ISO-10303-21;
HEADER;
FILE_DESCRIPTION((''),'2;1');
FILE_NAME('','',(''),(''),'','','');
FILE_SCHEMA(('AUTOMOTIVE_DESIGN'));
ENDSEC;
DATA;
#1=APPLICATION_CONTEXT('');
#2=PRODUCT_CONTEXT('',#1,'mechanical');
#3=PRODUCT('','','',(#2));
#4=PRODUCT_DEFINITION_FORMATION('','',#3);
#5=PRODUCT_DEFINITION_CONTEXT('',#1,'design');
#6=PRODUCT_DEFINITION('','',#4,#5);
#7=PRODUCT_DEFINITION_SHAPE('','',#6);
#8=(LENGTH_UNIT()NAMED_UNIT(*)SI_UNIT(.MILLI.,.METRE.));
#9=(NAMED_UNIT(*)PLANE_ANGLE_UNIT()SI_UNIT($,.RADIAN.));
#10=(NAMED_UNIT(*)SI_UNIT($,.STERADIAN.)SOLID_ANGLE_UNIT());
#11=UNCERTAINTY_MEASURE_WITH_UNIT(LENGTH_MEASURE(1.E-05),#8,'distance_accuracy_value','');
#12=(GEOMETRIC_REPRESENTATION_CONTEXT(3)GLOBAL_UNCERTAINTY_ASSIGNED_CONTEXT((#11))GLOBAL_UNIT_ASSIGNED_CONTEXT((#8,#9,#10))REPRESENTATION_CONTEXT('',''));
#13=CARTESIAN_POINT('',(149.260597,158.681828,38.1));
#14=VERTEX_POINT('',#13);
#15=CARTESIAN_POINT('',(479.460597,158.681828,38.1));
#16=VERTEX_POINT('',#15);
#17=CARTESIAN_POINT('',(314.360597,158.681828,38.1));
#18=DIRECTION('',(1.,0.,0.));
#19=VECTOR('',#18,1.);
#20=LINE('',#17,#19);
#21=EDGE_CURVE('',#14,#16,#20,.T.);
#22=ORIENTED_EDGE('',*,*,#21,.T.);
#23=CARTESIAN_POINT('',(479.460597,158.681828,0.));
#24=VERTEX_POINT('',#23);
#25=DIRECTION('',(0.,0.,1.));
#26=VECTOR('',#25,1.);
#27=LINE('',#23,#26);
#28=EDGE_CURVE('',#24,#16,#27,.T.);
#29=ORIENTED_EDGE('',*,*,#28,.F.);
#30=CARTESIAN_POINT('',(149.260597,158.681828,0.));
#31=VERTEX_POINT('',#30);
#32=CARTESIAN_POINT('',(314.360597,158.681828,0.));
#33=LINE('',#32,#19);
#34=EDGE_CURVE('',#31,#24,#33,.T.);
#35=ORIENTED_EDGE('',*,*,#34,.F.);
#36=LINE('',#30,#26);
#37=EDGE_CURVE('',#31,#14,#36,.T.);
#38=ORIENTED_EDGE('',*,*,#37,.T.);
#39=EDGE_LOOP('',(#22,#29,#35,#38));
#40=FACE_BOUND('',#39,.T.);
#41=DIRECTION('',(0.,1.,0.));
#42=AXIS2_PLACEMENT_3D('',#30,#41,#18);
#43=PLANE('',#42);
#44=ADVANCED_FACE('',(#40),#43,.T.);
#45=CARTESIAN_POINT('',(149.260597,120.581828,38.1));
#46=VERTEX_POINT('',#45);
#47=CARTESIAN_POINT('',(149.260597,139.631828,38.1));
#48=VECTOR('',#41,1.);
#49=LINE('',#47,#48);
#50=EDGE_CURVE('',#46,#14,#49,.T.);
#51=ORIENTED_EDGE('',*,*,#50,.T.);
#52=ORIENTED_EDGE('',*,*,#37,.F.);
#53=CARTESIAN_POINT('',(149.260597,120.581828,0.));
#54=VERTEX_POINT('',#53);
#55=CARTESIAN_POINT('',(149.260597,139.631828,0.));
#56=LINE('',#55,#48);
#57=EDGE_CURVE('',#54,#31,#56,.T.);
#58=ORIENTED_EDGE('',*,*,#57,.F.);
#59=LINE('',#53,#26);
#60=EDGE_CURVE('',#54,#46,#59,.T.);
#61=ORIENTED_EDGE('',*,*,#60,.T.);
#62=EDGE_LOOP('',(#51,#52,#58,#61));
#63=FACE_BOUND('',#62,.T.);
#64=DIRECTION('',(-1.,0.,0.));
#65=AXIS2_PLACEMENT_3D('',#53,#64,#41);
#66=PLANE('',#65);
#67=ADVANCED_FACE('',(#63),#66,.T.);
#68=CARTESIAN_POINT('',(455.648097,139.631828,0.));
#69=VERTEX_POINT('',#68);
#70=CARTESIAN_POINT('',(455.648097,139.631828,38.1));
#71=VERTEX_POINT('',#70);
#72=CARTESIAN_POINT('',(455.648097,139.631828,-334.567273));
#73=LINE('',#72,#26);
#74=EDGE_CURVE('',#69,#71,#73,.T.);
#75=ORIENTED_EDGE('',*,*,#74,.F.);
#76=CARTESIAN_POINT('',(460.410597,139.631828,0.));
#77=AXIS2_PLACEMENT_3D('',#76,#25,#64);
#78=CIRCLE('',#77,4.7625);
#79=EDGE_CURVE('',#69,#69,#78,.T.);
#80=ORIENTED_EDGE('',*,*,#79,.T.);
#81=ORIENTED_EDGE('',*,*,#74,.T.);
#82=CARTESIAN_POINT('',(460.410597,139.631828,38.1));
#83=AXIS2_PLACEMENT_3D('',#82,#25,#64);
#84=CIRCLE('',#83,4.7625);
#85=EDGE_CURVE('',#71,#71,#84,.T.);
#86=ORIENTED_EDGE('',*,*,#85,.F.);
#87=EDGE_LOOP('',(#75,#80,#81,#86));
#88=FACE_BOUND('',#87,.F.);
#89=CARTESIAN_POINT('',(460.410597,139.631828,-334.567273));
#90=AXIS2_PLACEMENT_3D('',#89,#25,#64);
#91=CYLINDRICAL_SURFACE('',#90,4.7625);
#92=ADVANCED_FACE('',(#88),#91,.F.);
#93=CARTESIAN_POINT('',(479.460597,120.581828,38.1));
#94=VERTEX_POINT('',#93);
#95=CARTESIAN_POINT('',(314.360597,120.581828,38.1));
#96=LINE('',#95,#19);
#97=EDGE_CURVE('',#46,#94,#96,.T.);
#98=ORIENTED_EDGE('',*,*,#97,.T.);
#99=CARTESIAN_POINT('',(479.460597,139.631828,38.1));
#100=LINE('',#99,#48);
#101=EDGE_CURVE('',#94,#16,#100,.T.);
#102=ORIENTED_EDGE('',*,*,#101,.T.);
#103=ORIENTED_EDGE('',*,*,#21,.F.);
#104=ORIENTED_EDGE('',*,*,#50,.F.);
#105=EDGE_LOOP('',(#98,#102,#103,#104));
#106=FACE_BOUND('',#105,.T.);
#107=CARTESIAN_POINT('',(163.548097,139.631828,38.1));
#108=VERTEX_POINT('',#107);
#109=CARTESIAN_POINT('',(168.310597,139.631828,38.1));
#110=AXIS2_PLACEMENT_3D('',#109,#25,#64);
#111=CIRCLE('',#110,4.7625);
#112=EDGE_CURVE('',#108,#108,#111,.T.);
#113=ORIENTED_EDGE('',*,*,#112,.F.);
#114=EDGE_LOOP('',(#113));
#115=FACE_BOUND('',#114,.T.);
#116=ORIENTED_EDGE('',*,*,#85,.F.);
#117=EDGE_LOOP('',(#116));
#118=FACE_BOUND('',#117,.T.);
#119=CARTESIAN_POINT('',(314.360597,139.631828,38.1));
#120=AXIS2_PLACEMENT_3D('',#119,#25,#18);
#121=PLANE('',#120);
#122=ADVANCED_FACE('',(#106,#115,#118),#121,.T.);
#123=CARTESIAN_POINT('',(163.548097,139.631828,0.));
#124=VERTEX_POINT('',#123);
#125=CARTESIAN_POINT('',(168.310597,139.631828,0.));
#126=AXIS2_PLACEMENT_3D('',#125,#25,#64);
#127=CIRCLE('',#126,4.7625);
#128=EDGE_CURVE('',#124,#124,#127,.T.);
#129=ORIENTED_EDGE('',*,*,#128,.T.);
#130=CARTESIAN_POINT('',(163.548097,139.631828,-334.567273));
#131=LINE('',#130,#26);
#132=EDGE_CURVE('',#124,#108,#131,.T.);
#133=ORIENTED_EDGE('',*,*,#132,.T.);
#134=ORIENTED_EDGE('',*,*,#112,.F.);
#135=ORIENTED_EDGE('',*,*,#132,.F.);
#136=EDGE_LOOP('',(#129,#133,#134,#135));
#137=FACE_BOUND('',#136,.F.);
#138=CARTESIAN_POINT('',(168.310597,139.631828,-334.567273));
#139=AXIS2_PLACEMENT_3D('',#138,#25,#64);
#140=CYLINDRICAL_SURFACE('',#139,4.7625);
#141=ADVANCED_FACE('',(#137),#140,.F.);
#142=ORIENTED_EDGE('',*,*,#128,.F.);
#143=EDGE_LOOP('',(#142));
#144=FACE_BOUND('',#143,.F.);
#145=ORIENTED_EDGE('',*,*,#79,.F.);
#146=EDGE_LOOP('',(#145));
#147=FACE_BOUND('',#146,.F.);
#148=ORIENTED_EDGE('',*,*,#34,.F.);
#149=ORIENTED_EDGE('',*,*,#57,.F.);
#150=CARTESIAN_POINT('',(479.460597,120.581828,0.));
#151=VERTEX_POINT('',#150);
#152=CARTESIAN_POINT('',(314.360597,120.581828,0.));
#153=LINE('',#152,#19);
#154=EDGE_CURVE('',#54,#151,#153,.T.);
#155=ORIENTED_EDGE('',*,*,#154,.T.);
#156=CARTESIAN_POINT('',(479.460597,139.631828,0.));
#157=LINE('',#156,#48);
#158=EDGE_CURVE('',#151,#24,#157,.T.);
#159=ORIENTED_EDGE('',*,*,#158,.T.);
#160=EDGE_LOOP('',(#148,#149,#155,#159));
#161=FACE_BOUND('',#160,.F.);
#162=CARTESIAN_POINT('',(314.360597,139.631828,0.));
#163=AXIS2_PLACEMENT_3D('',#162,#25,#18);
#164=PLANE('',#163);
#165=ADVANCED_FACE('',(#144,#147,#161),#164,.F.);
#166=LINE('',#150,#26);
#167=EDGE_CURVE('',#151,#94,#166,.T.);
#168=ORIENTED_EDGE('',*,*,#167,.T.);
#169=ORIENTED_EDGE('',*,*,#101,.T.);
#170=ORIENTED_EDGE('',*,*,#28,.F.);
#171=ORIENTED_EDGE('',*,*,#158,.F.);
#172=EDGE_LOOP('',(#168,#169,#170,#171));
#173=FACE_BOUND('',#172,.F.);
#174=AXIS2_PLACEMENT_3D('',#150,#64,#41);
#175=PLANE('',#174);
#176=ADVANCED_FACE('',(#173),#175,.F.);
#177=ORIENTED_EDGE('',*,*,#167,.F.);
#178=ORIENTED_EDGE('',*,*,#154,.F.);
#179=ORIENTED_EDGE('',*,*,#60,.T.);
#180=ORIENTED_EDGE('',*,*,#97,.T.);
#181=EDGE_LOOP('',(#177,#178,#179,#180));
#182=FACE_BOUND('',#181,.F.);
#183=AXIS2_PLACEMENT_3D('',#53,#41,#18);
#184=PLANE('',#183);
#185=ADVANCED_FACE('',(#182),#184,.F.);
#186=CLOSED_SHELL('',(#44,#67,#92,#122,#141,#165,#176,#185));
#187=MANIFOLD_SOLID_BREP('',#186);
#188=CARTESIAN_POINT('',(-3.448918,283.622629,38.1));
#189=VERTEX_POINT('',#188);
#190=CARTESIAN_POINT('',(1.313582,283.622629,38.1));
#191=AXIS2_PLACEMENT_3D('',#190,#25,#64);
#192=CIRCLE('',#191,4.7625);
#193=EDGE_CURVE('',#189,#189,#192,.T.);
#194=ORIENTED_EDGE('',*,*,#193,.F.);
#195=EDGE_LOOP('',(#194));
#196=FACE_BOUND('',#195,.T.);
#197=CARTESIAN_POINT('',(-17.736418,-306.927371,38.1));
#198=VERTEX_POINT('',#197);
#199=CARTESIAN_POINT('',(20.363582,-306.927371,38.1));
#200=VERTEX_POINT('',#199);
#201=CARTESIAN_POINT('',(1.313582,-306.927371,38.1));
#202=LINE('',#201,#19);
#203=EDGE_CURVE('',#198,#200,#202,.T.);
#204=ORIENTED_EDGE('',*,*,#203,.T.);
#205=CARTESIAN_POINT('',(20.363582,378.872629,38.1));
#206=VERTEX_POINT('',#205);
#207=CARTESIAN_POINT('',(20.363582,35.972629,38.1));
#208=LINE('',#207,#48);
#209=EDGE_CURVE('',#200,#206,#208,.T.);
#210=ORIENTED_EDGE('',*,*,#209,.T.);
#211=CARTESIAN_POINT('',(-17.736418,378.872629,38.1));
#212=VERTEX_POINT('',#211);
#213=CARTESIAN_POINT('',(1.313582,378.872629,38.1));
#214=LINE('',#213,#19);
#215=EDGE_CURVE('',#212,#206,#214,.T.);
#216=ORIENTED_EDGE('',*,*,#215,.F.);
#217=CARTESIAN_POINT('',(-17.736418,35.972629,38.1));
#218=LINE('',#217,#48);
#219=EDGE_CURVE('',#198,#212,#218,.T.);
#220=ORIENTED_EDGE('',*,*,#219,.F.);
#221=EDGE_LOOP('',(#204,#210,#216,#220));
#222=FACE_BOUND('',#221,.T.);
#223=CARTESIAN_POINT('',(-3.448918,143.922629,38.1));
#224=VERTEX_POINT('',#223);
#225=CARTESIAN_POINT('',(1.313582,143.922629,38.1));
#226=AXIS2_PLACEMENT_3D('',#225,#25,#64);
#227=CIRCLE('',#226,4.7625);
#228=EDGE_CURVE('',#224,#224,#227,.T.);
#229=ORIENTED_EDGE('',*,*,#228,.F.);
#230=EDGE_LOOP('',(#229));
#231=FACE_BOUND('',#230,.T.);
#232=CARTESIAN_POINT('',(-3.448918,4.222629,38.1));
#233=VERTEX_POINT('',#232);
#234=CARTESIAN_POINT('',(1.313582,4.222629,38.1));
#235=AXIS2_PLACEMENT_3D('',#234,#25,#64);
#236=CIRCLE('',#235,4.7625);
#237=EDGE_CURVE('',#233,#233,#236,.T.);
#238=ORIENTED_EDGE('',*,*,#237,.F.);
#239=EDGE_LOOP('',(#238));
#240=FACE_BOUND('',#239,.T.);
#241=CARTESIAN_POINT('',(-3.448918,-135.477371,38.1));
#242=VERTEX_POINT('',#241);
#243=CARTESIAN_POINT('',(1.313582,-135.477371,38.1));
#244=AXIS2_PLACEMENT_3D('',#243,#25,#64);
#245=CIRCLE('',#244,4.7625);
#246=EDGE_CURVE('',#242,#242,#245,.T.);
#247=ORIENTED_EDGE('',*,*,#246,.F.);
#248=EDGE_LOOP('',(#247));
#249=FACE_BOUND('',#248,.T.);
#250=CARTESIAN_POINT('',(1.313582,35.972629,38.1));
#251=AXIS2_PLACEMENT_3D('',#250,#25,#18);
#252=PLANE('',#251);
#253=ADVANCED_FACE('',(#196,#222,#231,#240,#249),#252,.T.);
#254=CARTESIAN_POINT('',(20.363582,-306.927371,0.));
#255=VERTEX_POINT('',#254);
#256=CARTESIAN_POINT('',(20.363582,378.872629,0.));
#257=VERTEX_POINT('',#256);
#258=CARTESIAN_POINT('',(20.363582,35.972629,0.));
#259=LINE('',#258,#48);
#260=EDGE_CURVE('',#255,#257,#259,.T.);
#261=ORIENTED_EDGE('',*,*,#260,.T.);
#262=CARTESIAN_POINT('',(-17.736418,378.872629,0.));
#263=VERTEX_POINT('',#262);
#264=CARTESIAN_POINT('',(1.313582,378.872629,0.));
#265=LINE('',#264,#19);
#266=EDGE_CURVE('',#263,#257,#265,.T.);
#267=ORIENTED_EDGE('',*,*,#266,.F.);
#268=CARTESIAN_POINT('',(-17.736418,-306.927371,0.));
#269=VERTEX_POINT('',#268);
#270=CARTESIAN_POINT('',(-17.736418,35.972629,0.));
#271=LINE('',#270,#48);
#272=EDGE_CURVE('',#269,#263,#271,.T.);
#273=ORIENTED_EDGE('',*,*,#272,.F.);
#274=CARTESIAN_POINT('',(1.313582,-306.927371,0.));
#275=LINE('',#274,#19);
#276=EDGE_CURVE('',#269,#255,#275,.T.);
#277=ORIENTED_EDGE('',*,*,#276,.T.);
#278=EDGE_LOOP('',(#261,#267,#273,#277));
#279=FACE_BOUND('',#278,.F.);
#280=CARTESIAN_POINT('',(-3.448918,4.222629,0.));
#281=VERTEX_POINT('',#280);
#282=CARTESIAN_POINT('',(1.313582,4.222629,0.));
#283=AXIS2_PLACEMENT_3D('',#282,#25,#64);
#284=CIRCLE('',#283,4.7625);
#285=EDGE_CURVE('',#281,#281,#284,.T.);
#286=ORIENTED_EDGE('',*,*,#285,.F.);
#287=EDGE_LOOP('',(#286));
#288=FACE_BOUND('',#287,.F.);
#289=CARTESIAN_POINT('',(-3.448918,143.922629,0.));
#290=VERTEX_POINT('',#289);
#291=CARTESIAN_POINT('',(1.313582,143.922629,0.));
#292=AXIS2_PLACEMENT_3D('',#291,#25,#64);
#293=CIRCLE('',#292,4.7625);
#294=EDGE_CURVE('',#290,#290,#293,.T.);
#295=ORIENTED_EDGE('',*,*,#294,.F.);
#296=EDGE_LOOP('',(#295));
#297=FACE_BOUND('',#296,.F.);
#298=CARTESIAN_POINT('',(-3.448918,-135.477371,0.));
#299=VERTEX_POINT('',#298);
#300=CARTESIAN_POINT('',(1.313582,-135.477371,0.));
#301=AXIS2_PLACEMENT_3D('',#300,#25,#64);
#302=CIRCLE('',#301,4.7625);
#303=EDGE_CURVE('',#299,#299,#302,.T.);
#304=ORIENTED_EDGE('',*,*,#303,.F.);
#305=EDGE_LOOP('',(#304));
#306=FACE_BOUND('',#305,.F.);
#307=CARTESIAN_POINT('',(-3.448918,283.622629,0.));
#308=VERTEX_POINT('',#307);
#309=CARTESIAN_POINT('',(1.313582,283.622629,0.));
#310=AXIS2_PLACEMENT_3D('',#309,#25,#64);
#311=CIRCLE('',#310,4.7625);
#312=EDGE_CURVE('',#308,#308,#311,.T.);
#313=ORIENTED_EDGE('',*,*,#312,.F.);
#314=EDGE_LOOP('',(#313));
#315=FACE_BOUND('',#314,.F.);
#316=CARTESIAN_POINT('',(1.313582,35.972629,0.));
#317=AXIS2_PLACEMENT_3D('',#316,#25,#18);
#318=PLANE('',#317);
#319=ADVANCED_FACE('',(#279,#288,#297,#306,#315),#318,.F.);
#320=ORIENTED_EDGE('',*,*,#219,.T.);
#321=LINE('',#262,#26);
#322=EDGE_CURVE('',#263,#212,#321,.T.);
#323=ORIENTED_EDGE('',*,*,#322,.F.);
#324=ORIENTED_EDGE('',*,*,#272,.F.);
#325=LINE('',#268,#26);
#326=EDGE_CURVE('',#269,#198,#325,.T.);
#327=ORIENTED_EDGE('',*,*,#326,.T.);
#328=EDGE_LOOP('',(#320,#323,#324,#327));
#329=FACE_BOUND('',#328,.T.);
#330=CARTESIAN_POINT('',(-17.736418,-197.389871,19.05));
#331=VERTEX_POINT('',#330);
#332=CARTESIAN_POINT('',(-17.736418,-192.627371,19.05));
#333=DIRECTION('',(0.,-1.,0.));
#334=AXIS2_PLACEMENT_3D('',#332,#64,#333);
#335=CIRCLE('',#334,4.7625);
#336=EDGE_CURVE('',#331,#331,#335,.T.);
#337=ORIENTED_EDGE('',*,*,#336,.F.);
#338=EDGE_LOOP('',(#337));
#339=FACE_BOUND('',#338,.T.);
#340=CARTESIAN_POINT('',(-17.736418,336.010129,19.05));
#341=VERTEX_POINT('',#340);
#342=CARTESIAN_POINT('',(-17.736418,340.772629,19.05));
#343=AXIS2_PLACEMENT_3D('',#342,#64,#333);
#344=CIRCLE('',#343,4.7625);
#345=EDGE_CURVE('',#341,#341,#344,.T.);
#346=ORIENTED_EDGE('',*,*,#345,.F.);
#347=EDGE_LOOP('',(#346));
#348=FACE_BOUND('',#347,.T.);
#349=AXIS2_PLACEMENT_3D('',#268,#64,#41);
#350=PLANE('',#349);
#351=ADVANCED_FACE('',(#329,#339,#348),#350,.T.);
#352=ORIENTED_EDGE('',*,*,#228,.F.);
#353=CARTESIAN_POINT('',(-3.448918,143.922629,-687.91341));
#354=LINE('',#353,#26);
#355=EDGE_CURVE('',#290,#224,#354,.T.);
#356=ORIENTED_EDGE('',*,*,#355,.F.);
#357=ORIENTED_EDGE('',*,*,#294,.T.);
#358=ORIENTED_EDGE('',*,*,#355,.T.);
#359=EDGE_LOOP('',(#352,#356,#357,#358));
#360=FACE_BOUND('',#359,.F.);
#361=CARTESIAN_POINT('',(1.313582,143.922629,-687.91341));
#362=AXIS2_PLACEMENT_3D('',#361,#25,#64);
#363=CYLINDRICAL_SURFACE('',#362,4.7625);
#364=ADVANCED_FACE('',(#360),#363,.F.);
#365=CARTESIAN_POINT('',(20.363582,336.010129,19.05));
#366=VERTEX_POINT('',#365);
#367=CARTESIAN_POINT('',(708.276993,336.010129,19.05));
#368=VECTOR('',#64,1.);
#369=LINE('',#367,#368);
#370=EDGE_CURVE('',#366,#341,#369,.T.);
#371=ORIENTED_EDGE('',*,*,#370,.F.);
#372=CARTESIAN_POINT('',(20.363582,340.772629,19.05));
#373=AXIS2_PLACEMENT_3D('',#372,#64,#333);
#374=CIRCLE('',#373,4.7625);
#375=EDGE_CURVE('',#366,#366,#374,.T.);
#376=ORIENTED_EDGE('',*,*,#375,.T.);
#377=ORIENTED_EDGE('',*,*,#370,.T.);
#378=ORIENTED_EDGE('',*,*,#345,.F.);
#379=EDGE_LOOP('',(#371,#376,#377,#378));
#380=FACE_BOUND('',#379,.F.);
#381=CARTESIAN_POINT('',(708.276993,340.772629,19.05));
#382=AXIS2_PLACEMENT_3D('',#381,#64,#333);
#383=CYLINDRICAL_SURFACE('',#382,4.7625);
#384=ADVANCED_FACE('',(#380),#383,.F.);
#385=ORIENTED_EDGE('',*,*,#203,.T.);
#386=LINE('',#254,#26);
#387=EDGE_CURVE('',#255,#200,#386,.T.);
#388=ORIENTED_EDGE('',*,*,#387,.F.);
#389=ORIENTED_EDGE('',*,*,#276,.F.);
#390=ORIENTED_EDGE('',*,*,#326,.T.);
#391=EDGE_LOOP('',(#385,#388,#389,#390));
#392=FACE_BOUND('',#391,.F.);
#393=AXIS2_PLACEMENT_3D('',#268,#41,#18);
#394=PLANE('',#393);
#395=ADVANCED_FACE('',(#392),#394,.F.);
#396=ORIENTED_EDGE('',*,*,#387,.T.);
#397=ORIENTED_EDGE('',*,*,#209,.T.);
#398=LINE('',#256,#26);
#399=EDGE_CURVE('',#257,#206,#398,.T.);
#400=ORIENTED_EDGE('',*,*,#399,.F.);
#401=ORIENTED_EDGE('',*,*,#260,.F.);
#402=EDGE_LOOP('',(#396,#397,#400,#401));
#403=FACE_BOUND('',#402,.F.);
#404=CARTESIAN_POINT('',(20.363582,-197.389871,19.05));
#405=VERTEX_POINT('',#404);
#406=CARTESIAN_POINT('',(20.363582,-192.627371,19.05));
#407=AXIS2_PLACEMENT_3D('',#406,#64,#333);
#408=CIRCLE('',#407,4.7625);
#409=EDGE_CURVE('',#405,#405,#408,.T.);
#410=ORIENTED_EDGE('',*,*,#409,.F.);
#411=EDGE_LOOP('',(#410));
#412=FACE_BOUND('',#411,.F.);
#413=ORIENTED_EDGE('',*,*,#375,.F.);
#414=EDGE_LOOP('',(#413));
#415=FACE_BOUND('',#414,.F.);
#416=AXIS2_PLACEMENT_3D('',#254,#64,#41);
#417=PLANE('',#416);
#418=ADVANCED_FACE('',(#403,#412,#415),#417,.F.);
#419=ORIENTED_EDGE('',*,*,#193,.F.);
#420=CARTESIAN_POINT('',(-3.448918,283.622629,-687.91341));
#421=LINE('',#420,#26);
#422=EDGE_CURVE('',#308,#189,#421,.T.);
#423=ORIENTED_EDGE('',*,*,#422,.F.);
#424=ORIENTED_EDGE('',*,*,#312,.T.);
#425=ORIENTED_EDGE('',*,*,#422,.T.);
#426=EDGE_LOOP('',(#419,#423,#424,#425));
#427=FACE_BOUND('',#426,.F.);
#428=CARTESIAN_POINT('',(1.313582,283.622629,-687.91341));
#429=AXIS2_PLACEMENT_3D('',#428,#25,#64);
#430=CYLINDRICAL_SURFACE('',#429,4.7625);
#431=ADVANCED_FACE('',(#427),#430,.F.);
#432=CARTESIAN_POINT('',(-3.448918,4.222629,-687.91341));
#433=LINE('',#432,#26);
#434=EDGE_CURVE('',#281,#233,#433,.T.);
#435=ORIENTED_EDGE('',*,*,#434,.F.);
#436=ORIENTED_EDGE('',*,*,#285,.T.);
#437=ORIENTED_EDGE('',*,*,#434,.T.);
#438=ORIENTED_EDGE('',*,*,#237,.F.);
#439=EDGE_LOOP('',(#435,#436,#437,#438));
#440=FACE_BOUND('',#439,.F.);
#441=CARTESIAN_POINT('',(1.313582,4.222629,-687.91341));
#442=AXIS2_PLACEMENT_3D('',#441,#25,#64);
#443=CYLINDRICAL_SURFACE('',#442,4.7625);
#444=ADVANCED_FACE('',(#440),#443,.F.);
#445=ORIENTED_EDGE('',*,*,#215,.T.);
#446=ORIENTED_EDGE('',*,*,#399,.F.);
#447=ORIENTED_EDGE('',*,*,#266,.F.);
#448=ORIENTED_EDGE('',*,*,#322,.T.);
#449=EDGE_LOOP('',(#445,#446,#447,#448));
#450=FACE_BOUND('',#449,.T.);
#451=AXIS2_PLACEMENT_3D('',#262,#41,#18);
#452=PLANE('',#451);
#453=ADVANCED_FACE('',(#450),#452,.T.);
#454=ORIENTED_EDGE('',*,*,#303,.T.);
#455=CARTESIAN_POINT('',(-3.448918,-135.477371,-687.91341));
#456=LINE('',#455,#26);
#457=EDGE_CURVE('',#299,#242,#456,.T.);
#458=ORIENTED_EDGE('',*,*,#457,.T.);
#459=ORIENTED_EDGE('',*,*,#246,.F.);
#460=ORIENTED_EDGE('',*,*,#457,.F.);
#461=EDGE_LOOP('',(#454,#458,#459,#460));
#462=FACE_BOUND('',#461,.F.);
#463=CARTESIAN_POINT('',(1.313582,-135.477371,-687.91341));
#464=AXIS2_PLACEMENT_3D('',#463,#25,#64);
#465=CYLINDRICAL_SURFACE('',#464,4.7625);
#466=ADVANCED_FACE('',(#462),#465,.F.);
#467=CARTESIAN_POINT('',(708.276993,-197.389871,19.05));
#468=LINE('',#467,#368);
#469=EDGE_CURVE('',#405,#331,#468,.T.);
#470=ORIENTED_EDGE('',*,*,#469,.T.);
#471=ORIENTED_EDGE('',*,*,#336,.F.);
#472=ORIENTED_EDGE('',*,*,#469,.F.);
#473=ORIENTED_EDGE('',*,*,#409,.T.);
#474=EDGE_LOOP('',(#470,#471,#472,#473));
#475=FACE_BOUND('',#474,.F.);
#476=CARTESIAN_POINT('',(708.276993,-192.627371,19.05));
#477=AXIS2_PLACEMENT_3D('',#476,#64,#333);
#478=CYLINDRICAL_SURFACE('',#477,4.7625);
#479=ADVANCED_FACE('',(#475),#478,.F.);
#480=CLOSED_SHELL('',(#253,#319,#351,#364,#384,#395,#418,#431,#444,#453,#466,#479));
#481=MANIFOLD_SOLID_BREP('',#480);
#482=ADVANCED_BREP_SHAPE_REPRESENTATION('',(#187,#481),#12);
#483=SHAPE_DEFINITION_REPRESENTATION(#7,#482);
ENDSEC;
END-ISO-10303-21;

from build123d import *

# Parameters (mm, degrees)
F0_W      = 38.1
F0_H      = 685.8
F1_DEPTH  = 38.1
F4_D      = 9.525
F5_D      = 9.525
F6_D      = 9.525
F7_D      = 9.525
F8_D      = 9.525
F9_D      = 9.525
F10_W     = 330.2
F10_H     = 38.1
F11_DEPTH = 38.1
F12_D     = 9.525
F13_D     = 9.525


# Not quite as in the source:
# - a feature names something its author has since deleted; it is built from what else it names


with BuildPart() as f1:
    # F0 (on Top) → F1 (new body)
    with BuildSketch(Plane.XY):
        with Locations((1.3135822982, 35.9726289988)):
            Rectangle(F0_W, F0_H)
    extrude(amount=F1_DEPTH)

    # F4 (through all)
    with Locations(Plane(origin=(0, 0, 0), x_dir=(1, 0, 0), z_dir=(0, 0, -1))):
        with Locations((1.3135822982, 135.4773710012)):
            Hole(F4_D / 2)

    # F5 (through all)
    with Locations(Plane(origin=(0, 0, 0), x_dir=(1, 0, 0), z_dir=(0, 0, -1))):
        with Locations((1.3135822982, -4.2226289988)):
            Hole(F5_D / 2)

    # F6 (through all)
    with Locations(Plane(origin=(0, 0, 0), x_dir=(1, 0, 0), z_dir=(0, 0, -1))):
        with Locations((1.3135822982, -143.9226289988)):
            Hole(F6_D / 2)

    # F7 (through all)
    with Locations(Plane(origin=(0, 0, 0), x_dir=(1, 0, 0), z_dir=(0, 0, -1))):
        with Locations((1.3135822982, -283.6226289988)):
            Hole(F7_D / 2)

    # F8 (through all)
    with Locations(Plane.YZ.offset(20.3635822982)):
        with Locations((-192.6273710012, 19.05)):
            Hole(F8_D / 2)

    # F9 (through all)
    with Locations(Plane.YZ.offset(20.3635822982)):
        with Locations((340.7726289988, 19.05)):
            Hole(F9_D / 2)


with BuildPart() as f11:
    # F10 (on Top) → F11 (new body)
    with BuildSketch(Plane.XY):
        with Locations((314.3605970383, 139.6318280578)):
            Rectangle(F10_W, F10_H)
    extrude(amount=F11_DEPTH)

    # F12 (through all)
    with Locations(Plane(origin=(0, 0, 0), x_dir=(1, 0, 0), z_dir=(0, 0, -1))):
        with Locations((168.3105970383, -139.6318280578)):
            Hole(F12_D / 2)

    # F13 (through all)
    with Locations(Plane(origin=(0, 0, 0), x_dir=(1, 0, 0), z_dir=(0, 0, -1))):
        with Locations((460.4105970383, -139.6318280578)):
            Hole(F13_D / 2)


solid = Compound([f1.part, f11.part])
